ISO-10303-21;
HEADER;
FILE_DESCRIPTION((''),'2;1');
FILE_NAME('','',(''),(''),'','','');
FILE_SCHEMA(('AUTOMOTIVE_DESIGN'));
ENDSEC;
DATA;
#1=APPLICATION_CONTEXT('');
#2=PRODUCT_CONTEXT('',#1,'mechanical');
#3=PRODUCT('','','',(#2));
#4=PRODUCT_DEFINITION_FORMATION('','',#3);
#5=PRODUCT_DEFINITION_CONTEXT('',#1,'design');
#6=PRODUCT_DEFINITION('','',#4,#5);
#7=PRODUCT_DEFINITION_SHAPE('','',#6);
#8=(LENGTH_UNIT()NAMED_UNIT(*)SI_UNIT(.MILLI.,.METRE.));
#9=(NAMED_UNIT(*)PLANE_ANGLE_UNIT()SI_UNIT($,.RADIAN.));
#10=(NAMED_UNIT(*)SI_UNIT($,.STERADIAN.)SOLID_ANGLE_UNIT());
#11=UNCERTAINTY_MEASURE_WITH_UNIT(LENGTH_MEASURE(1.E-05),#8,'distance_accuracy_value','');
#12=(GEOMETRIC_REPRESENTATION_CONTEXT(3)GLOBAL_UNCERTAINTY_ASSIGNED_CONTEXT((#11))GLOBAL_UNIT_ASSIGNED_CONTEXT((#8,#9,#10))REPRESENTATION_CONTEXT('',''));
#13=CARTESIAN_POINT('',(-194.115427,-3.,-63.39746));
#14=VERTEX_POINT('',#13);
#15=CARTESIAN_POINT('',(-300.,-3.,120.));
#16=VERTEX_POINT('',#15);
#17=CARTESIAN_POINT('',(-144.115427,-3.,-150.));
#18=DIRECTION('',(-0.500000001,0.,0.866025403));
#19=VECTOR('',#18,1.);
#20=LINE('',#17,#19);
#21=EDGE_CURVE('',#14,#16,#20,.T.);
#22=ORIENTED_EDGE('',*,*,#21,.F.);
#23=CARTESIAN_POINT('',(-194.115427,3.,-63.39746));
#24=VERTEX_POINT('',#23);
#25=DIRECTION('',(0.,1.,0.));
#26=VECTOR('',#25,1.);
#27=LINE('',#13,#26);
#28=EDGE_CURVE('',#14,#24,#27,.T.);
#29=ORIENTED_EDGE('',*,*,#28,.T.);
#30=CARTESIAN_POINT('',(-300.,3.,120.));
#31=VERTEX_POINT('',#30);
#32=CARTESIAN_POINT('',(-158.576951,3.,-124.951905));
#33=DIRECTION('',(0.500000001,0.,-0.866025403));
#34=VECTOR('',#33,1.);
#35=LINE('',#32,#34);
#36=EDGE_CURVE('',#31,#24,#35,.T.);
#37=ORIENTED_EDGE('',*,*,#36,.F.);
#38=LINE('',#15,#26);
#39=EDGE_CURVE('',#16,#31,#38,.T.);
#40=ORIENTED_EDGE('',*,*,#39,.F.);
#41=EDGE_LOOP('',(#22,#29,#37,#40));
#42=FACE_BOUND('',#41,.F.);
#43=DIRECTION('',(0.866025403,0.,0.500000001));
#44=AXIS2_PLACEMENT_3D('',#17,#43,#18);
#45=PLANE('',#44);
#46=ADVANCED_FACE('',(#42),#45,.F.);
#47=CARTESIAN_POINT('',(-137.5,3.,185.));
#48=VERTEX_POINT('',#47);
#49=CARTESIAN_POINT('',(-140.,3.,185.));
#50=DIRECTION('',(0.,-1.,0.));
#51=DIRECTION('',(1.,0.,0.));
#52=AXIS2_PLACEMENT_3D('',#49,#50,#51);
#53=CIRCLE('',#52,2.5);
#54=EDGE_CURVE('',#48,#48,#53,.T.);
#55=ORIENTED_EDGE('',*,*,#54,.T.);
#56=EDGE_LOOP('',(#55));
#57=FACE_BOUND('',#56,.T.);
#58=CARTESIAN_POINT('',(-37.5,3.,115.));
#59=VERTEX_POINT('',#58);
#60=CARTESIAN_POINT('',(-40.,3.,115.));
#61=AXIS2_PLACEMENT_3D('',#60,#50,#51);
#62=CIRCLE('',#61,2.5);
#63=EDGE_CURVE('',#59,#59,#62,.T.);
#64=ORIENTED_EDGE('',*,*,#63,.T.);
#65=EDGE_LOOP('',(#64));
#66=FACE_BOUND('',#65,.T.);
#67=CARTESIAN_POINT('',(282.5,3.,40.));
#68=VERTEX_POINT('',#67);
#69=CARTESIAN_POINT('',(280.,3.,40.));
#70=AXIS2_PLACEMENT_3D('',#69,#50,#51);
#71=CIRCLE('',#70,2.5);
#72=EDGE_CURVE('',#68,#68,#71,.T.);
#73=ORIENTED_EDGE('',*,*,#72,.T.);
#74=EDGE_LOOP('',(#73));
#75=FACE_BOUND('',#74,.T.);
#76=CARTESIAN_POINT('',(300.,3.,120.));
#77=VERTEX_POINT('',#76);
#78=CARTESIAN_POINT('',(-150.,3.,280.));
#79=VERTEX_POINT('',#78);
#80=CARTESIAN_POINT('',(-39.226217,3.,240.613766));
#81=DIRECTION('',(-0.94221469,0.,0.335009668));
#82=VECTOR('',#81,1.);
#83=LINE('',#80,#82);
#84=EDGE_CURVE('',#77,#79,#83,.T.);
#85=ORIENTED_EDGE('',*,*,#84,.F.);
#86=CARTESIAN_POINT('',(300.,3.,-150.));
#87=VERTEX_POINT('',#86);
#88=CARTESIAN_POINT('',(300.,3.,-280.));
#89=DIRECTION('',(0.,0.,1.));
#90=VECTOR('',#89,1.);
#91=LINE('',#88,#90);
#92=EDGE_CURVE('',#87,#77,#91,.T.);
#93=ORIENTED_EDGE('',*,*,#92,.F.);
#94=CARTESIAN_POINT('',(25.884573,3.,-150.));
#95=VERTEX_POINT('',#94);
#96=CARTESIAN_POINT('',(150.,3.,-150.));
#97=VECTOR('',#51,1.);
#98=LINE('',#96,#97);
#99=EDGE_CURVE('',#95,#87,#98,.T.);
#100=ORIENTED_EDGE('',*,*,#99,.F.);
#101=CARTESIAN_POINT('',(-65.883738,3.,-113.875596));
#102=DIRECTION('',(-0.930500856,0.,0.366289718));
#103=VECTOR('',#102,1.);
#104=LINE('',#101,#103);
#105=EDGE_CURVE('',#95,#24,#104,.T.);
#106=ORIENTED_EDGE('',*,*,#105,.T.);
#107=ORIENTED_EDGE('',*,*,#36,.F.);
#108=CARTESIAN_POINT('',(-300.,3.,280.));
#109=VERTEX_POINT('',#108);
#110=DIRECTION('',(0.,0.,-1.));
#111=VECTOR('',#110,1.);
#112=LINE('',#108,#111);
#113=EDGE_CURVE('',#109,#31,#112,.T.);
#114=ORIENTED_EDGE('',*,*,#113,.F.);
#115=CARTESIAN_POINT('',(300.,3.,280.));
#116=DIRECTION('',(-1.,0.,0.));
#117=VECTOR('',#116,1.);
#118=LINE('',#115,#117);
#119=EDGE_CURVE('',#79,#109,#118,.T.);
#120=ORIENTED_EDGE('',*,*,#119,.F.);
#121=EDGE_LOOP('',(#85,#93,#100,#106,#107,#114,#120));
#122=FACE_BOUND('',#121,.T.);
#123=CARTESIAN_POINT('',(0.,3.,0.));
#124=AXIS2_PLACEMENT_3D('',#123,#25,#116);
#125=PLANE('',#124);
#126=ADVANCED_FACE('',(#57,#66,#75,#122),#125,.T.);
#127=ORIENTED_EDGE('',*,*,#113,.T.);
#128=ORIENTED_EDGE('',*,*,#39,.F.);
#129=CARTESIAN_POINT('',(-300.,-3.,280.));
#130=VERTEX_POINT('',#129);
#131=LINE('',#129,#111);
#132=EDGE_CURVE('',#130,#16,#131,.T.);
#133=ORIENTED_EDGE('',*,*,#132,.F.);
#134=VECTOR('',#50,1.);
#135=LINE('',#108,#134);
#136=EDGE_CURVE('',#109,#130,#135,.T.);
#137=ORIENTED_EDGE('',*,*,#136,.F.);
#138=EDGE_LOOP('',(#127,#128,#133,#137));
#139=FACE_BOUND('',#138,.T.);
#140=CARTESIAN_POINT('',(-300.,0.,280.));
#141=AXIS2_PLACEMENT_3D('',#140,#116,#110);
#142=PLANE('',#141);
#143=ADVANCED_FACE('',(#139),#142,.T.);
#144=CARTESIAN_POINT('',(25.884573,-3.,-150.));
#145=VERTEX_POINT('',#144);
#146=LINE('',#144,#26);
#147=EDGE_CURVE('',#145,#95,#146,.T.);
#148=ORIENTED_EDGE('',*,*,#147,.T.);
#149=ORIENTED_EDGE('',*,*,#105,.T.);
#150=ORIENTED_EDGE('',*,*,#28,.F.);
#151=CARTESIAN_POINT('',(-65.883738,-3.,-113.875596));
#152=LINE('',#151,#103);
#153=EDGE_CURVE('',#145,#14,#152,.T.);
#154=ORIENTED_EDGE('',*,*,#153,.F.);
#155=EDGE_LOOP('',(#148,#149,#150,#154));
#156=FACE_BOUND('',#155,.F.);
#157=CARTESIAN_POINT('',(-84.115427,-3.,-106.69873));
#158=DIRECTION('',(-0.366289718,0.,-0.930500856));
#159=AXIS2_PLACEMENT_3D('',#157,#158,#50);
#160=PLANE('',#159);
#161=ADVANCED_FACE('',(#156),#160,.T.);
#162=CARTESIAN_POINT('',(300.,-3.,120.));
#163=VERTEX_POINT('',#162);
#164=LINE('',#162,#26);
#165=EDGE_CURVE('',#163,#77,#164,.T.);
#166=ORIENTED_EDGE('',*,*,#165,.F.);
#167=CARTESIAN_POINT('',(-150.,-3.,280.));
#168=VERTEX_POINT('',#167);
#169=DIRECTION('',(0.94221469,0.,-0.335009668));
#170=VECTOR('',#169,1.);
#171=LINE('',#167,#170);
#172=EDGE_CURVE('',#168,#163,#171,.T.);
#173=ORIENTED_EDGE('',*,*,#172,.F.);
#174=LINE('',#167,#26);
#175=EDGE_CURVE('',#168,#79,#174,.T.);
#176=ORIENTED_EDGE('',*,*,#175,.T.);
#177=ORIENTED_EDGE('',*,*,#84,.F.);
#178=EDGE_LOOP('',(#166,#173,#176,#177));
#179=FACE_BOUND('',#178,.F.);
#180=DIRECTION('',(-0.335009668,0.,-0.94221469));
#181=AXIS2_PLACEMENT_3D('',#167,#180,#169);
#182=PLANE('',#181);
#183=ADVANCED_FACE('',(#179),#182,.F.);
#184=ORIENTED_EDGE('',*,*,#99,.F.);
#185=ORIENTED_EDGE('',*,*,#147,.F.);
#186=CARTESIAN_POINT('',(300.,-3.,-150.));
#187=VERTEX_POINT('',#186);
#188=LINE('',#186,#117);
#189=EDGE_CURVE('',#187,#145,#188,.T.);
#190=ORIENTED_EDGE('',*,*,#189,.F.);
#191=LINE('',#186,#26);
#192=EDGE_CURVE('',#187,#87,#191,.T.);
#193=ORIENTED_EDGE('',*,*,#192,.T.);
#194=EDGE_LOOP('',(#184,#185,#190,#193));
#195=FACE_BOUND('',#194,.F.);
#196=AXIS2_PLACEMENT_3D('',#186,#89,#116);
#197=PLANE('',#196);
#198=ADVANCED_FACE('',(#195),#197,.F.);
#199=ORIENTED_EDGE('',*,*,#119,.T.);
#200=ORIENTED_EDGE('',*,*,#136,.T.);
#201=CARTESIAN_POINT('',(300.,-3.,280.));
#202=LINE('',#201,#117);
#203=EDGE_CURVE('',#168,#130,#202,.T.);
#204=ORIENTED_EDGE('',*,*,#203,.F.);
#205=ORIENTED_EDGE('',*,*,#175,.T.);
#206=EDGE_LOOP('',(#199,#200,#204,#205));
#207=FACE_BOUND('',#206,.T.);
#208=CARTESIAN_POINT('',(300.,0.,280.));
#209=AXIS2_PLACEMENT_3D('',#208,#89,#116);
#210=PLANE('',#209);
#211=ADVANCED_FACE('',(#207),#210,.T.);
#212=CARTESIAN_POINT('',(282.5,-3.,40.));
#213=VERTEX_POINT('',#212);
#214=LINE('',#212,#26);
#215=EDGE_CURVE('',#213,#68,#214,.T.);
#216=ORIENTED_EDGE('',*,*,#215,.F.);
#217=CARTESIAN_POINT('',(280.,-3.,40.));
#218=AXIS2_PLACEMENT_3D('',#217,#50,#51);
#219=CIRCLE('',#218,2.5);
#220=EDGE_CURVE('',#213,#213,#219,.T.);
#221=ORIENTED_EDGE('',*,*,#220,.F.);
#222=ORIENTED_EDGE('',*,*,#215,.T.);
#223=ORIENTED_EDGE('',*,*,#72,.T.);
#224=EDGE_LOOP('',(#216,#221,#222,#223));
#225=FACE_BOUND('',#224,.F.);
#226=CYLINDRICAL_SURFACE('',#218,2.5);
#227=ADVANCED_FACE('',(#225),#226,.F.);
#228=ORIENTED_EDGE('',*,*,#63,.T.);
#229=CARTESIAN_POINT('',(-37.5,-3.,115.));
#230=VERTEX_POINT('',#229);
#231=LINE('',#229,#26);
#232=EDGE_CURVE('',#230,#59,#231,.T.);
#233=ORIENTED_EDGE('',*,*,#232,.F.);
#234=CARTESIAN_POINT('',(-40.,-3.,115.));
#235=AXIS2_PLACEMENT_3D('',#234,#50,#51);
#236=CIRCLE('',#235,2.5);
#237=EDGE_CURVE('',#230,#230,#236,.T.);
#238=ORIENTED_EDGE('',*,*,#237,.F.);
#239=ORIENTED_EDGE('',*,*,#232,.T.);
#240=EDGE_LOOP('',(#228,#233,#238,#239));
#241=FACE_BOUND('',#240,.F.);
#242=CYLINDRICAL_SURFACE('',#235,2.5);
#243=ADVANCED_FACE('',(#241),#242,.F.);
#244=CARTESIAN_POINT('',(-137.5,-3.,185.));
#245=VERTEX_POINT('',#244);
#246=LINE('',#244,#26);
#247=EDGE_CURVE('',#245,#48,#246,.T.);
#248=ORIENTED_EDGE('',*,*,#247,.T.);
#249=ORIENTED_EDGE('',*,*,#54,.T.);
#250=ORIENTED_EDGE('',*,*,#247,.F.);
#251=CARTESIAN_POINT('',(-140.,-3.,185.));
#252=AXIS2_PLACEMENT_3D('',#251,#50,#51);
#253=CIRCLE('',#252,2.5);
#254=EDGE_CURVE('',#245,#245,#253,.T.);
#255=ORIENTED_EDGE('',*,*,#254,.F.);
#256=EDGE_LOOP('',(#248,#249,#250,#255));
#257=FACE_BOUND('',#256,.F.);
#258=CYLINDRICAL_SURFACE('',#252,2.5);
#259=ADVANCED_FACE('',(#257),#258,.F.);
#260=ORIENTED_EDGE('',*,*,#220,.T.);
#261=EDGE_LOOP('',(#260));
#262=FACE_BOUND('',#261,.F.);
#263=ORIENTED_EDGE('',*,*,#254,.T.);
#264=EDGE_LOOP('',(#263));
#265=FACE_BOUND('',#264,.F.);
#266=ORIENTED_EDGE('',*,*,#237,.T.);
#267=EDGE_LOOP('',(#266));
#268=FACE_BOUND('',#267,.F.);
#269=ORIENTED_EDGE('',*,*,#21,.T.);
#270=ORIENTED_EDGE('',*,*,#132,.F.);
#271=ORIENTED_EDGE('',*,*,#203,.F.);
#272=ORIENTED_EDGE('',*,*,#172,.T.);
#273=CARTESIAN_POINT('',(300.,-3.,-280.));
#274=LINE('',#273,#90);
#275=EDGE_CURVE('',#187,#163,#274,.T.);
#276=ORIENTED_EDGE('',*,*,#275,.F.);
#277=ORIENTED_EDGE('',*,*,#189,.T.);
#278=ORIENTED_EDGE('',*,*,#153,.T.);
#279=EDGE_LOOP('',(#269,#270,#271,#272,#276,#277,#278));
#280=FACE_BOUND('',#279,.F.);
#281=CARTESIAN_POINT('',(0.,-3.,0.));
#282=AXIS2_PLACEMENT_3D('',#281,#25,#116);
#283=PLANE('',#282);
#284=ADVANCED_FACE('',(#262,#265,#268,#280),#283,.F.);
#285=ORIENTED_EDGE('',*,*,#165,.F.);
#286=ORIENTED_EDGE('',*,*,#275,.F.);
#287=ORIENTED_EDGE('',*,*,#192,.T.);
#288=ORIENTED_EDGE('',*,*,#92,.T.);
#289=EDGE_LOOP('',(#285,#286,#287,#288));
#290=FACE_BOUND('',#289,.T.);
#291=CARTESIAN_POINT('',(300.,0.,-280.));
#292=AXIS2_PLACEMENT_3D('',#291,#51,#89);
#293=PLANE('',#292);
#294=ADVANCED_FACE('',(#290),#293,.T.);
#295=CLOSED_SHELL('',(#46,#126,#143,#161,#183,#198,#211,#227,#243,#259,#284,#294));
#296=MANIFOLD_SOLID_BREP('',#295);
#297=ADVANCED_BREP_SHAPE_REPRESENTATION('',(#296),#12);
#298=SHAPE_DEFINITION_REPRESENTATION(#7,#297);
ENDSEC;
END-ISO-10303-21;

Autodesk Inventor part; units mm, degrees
ref_plane "YZ Plane" through (0, 0, 0) normal (1, 0, 0) x (0, 1, 0)
ref_plane "XZ Plane" through (0, 0, 0) normal (0, 1, 0) x (-1, 0, 0)
ref_plane "XY Plane" through (0, 0, 0) normal (0, 0, 1) x (1, 0, 0)
sketch "スケッチ1" plane through (0, 0, 0) normal (0, 1, 0) x (-1, 0, 0)
  line L0 (-300, 280) -> (300, 280)
  line L1 (300, 280) -> (300, -280)
  line L2 (300, -280) -> (-300, -280)
  line L3 (-300, -280) -> (-300, 280)
  line L4 (-300, 280) -> (300, -280) construction
  line L5 (300, 280) -> (-300, -280) construction
  point P0 (0, 0)
  dimension "d0" = 600
  dimension "d1" = 560
extrude "押し出し1" add sketch "スケッチ1" along normal mid plane 6
sketch "スケッチ3" plane through (0, -3, 0) normal (0, -1, 0) x (1, 0, 0)
  circle A0 centre (-40, 115) radius 2.5
  line L0 (300, -280) -> (300, 280) projected
  line L1 (-300, -280) -> (300, -280) projected
  circle A1 centre (-140, 185) radius 2.5
  circle A2 centre (280, 40) radius 2.5
  point P0 (0, 0)
  dimension "d10" = 5
  dimension "d15" = 5
  dimension "d16" = 320
  dimension "d17" = 20
  dimension "d18" = 5
  dimension "d24" = 75
  dimension "d25" = 320
  dimension "d26" = 420
  dimension "d27" = 145
extrude "押し出し4" cut sketch "スケッチ3" against normal through all
sketch "スケッチ5" plane through (0, -3, 0) normal (0, -1, 0) x (1, 0, 0)
  line L0 (300, 250) -> (-300, 250)
  line L1 (-250, 280) -> (-250, -280) construction
  line L2 (-300, -250) -> (300, -250)
  line L3 (250, -280) -> (250, 280) construction
  line L4 (-300, 280) -> (300, 280)
  line L5 (-150, 280) -> (300, 120)
  line L6 (300, 280) -> (300, -280)
  line L7 (-300, -280) -> (-300, 280)
  line L8 (-300, 120) -> (-144.115427, -150)
  line L9 (-144.115427, -150) -> (300, -150)
  line L10 (300, -280) -> (300, 280)
  point P0 (0, 0)
  dimension "d32" = 100
  dimension "d33" = 130
  dimension "d34" = 400
  dimension "d35" = 60
  dimension "d46" = 270
sketch "スケッチ5 outline for 押し出し5" plane through (0, -3, 0) normal (0, -1, 0) x (1, 0, 0)
  line L0 (300, 120) -> (300, 280)
  line L1 (-150, 280) -> (300, 120)
  line L2 (300, 280) -> (-150, 280)
  line L3 (-300, 120) -> (-300, -280)
  line L4 (-144.115427, -150) -> (-300, 120)
  line L5 (300, -150) -> (-144.115427, -150)
  line L6 (300, -280) -> (300, -150)
  line L7 (-300, -280) -> (300, -280)
extrude "押し出し5" cut sketch "スケッチ5 outline for 押し出し5" against normal through all
chamfer "面取り2" distance 170 distance2 100 1 edges at (-144.1154, 0, -150) measured on face at (151.9615, -1, -150)
properties part number "endplate" material "CFRP"
